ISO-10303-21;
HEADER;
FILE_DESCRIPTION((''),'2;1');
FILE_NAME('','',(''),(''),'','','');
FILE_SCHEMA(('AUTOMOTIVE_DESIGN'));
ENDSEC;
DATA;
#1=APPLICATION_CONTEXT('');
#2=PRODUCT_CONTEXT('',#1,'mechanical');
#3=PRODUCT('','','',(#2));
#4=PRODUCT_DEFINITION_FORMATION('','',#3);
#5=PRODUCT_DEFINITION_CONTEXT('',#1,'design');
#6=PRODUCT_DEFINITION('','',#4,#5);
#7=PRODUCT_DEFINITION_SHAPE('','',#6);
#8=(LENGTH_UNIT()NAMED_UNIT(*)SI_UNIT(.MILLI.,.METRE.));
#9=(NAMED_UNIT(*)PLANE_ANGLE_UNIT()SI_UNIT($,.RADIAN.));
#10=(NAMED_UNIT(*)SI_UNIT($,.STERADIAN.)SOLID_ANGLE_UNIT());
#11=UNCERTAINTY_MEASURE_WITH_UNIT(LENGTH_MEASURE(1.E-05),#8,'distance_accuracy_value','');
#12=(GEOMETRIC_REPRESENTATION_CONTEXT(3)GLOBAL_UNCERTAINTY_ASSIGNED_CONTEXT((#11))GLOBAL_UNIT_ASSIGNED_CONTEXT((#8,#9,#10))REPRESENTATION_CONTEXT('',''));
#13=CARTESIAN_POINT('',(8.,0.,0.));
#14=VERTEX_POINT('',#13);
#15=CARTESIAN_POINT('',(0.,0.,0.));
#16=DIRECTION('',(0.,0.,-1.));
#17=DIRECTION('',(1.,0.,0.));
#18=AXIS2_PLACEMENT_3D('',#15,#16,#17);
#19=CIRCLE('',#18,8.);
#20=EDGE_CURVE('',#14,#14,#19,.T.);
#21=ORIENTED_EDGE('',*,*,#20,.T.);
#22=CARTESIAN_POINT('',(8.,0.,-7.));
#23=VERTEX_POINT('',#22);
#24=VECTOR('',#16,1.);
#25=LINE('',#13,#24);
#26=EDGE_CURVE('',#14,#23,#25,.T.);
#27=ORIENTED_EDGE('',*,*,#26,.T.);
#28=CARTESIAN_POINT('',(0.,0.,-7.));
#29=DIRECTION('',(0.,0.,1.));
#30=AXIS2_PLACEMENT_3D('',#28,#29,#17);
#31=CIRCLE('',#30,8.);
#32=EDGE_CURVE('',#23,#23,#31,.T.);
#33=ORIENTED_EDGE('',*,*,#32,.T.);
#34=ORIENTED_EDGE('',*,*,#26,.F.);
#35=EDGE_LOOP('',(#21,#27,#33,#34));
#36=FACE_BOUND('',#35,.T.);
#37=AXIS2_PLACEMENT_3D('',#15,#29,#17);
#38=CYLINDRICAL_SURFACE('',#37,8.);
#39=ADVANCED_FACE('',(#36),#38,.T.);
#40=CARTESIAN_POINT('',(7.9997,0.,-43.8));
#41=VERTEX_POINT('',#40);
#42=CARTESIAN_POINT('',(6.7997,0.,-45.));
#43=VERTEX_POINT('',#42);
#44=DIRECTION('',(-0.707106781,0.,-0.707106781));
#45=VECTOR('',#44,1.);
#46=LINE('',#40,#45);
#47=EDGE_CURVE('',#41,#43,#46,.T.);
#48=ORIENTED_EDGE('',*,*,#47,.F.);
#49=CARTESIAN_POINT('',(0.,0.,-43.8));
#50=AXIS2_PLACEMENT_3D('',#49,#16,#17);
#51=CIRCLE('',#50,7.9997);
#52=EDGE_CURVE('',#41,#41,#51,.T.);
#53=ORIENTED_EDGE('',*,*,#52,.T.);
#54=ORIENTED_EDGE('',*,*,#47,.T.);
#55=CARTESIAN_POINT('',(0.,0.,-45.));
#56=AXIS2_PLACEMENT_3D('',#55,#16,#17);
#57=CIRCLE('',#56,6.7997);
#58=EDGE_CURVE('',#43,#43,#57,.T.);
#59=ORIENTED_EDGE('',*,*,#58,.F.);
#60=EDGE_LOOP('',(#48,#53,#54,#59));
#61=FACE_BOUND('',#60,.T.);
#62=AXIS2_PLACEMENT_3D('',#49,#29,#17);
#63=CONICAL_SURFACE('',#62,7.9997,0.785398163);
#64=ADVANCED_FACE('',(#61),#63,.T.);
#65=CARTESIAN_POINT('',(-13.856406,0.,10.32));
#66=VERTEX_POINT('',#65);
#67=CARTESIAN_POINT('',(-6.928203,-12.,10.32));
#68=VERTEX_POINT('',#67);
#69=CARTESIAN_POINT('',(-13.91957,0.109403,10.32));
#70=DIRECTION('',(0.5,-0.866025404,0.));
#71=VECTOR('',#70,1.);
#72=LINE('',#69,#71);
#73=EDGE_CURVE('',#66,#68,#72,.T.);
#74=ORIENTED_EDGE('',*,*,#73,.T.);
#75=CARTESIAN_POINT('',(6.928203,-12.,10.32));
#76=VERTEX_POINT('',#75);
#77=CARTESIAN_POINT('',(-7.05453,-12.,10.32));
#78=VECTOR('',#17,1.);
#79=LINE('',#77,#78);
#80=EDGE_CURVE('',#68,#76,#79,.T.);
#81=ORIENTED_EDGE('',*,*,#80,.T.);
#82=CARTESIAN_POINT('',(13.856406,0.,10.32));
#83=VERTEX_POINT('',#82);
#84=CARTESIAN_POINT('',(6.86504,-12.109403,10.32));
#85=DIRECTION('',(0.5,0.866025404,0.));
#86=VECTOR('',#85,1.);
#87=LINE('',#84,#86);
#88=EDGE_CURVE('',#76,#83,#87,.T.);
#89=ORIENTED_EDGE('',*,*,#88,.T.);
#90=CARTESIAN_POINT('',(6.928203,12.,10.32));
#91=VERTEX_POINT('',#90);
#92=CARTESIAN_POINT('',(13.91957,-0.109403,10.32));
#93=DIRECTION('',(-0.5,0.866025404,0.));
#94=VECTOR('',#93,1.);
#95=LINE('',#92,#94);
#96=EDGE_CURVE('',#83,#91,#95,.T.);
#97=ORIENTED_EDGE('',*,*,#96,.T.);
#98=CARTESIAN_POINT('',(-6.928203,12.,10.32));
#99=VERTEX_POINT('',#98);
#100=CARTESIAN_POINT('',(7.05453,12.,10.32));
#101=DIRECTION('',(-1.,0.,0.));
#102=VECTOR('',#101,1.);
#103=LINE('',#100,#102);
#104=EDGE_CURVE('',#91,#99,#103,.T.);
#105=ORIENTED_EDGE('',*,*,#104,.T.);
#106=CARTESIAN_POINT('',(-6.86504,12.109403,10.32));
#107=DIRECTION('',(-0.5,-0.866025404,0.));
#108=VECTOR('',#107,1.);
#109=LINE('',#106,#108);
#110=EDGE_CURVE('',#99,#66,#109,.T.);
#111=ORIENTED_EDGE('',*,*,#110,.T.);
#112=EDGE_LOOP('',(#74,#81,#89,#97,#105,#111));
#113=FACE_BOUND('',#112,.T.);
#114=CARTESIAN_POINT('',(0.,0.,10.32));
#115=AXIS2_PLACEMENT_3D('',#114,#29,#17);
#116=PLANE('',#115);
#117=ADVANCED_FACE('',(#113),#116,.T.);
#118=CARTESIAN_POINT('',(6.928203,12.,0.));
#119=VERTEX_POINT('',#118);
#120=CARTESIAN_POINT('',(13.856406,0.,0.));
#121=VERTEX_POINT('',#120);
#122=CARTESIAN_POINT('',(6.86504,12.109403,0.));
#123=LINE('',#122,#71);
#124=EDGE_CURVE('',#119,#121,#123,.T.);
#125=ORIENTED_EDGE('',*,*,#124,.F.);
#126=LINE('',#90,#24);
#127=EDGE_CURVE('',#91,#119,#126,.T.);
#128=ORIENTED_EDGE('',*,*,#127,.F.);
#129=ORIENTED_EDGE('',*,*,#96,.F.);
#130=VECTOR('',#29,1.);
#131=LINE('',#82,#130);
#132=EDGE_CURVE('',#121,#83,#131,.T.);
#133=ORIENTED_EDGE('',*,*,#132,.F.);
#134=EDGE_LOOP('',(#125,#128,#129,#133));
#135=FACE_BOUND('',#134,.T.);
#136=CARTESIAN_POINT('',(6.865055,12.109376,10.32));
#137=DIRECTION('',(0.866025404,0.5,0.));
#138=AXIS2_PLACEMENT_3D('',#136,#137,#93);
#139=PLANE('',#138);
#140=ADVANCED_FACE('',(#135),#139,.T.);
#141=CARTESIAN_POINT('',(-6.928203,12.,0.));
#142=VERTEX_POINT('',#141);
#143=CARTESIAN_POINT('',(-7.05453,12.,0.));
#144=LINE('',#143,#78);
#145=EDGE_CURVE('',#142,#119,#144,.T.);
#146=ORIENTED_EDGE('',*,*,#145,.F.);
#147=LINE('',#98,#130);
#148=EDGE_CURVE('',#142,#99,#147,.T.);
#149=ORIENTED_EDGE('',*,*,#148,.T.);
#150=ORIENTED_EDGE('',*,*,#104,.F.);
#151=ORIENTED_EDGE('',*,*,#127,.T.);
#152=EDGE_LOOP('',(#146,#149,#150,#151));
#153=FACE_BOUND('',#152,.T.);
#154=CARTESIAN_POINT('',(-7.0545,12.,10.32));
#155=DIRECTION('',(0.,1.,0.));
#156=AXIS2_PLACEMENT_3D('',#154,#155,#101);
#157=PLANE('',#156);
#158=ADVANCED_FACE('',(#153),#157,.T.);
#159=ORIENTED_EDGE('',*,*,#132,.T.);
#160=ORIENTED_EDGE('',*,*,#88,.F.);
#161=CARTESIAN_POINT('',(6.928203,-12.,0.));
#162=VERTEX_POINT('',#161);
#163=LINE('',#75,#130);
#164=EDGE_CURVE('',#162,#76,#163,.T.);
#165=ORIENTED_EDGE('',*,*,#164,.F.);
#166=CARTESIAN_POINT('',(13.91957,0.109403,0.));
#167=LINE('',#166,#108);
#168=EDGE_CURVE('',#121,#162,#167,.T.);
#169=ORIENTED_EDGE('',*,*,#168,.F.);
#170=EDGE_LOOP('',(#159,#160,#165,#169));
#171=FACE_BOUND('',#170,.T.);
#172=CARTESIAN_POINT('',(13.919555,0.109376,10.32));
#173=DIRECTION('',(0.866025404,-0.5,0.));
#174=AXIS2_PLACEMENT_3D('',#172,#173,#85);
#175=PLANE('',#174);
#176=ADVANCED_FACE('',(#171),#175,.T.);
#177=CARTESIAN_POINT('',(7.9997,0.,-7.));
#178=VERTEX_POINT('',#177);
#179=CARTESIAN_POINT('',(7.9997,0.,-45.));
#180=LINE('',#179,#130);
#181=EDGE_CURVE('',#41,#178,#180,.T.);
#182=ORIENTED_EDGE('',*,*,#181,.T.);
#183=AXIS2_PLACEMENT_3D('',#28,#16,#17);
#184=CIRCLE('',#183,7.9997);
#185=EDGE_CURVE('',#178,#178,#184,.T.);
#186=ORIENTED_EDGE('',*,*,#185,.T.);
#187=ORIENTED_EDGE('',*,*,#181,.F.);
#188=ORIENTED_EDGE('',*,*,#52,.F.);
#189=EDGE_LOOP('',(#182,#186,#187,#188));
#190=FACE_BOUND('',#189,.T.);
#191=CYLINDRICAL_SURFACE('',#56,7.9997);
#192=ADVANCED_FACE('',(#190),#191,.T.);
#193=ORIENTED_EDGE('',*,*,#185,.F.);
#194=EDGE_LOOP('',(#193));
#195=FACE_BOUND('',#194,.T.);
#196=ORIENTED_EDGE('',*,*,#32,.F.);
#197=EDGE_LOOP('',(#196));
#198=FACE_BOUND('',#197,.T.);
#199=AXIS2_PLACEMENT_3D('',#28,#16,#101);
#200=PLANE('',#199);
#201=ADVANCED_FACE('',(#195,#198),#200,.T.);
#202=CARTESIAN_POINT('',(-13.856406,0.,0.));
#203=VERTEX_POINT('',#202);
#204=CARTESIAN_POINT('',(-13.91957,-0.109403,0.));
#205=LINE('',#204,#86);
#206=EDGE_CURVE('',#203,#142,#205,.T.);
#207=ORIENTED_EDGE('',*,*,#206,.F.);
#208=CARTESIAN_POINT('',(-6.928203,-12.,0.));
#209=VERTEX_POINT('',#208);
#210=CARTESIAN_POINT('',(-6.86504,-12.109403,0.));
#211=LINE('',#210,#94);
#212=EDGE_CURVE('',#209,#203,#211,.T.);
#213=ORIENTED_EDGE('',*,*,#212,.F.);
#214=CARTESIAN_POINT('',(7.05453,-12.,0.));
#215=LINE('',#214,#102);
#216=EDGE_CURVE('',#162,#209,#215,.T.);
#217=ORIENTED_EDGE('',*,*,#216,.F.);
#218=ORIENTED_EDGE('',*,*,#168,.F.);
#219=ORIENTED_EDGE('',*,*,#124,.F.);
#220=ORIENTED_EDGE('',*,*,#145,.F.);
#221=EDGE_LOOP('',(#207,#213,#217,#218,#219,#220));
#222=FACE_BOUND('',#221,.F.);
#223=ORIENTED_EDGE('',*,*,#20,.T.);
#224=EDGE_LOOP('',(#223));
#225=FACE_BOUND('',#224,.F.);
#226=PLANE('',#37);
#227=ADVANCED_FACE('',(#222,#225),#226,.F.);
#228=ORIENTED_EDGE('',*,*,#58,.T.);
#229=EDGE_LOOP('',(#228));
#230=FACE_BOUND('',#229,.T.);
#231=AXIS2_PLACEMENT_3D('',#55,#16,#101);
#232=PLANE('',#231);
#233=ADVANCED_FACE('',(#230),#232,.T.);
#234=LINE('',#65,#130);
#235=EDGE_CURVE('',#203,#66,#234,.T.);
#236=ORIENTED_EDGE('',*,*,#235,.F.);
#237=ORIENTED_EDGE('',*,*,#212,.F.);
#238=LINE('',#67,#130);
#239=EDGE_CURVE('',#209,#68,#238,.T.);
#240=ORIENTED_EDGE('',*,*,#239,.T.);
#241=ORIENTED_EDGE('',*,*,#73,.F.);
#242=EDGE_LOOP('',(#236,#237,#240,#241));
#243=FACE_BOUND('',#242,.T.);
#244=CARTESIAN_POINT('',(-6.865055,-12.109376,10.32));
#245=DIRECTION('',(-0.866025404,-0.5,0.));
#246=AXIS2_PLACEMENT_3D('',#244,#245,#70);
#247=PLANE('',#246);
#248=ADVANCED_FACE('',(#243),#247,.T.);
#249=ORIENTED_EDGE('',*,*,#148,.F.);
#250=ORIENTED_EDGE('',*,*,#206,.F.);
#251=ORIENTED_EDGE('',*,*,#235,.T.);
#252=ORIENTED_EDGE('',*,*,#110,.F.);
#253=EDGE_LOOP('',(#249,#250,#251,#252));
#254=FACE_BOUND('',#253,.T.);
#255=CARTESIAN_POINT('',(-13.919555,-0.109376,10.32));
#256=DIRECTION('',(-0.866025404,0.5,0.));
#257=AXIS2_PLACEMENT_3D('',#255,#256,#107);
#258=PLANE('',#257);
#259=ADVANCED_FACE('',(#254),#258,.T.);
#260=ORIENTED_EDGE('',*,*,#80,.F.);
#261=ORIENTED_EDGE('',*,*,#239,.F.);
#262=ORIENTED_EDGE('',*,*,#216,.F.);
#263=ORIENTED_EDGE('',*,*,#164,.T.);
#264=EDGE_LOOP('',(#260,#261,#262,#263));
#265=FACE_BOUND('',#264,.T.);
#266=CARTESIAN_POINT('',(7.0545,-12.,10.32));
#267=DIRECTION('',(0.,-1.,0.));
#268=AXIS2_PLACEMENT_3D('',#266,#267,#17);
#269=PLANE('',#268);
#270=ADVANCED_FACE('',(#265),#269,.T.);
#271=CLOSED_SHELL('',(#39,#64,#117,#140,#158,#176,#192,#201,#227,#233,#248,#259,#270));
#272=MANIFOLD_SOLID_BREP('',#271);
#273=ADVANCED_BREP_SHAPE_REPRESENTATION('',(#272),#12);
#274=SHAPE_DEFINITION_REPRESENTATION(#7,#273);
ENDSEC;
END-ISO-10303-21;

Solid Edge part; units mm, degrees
sketch "Sketch1" plane through (0, 0, 0) normal (0, 0, 1) x (1, 0, 0)
  circle A0 centre (0, 0) radius 13.92
  dimension "D1" = 27.84
extrude "Protrusion1" add sketch "Sketch1" along normal blind 10.32
sketch "Sketch2" plane through (0, 0, 0) normal (0, 0, -1) x (1, 0, 0)
  circle A0 centre (0, 0) radius 8
extrude "Protrusion2" add sketch "Sketch2" along normal blind 45
sketch "Sketch3" plane through (0, 0, -45) normal (0, 0, -1) x (1, 0, 0)
  circle A0 centre (0, 0) radius 7.9997
extrude "Cutout1" cut sketch "Sketch3" against normal blind 38 flip side to cut
chamfer "Chamfer_1" distance 1.2 angle 45 1 edges at (-7.9997, 0, -45)
sketch "Sketch4" plane through (0, 0, 10.32) normal (0, 0, 1) x (1, 0, 0)
  line L0 (-7.0545, 12) -> (7.0545, 12)
  dimension "D1" = 24
extrude "Cutout2" cut sketch "Sketch4" against normal up to next material side at (0, 12.05, 10.32)
pattern_circular "Pattern1" count 6 over 360 about axis through (0, 0, 10.32) along (0, 0, 1) of "Cutout2"
properties part number "24104516"
